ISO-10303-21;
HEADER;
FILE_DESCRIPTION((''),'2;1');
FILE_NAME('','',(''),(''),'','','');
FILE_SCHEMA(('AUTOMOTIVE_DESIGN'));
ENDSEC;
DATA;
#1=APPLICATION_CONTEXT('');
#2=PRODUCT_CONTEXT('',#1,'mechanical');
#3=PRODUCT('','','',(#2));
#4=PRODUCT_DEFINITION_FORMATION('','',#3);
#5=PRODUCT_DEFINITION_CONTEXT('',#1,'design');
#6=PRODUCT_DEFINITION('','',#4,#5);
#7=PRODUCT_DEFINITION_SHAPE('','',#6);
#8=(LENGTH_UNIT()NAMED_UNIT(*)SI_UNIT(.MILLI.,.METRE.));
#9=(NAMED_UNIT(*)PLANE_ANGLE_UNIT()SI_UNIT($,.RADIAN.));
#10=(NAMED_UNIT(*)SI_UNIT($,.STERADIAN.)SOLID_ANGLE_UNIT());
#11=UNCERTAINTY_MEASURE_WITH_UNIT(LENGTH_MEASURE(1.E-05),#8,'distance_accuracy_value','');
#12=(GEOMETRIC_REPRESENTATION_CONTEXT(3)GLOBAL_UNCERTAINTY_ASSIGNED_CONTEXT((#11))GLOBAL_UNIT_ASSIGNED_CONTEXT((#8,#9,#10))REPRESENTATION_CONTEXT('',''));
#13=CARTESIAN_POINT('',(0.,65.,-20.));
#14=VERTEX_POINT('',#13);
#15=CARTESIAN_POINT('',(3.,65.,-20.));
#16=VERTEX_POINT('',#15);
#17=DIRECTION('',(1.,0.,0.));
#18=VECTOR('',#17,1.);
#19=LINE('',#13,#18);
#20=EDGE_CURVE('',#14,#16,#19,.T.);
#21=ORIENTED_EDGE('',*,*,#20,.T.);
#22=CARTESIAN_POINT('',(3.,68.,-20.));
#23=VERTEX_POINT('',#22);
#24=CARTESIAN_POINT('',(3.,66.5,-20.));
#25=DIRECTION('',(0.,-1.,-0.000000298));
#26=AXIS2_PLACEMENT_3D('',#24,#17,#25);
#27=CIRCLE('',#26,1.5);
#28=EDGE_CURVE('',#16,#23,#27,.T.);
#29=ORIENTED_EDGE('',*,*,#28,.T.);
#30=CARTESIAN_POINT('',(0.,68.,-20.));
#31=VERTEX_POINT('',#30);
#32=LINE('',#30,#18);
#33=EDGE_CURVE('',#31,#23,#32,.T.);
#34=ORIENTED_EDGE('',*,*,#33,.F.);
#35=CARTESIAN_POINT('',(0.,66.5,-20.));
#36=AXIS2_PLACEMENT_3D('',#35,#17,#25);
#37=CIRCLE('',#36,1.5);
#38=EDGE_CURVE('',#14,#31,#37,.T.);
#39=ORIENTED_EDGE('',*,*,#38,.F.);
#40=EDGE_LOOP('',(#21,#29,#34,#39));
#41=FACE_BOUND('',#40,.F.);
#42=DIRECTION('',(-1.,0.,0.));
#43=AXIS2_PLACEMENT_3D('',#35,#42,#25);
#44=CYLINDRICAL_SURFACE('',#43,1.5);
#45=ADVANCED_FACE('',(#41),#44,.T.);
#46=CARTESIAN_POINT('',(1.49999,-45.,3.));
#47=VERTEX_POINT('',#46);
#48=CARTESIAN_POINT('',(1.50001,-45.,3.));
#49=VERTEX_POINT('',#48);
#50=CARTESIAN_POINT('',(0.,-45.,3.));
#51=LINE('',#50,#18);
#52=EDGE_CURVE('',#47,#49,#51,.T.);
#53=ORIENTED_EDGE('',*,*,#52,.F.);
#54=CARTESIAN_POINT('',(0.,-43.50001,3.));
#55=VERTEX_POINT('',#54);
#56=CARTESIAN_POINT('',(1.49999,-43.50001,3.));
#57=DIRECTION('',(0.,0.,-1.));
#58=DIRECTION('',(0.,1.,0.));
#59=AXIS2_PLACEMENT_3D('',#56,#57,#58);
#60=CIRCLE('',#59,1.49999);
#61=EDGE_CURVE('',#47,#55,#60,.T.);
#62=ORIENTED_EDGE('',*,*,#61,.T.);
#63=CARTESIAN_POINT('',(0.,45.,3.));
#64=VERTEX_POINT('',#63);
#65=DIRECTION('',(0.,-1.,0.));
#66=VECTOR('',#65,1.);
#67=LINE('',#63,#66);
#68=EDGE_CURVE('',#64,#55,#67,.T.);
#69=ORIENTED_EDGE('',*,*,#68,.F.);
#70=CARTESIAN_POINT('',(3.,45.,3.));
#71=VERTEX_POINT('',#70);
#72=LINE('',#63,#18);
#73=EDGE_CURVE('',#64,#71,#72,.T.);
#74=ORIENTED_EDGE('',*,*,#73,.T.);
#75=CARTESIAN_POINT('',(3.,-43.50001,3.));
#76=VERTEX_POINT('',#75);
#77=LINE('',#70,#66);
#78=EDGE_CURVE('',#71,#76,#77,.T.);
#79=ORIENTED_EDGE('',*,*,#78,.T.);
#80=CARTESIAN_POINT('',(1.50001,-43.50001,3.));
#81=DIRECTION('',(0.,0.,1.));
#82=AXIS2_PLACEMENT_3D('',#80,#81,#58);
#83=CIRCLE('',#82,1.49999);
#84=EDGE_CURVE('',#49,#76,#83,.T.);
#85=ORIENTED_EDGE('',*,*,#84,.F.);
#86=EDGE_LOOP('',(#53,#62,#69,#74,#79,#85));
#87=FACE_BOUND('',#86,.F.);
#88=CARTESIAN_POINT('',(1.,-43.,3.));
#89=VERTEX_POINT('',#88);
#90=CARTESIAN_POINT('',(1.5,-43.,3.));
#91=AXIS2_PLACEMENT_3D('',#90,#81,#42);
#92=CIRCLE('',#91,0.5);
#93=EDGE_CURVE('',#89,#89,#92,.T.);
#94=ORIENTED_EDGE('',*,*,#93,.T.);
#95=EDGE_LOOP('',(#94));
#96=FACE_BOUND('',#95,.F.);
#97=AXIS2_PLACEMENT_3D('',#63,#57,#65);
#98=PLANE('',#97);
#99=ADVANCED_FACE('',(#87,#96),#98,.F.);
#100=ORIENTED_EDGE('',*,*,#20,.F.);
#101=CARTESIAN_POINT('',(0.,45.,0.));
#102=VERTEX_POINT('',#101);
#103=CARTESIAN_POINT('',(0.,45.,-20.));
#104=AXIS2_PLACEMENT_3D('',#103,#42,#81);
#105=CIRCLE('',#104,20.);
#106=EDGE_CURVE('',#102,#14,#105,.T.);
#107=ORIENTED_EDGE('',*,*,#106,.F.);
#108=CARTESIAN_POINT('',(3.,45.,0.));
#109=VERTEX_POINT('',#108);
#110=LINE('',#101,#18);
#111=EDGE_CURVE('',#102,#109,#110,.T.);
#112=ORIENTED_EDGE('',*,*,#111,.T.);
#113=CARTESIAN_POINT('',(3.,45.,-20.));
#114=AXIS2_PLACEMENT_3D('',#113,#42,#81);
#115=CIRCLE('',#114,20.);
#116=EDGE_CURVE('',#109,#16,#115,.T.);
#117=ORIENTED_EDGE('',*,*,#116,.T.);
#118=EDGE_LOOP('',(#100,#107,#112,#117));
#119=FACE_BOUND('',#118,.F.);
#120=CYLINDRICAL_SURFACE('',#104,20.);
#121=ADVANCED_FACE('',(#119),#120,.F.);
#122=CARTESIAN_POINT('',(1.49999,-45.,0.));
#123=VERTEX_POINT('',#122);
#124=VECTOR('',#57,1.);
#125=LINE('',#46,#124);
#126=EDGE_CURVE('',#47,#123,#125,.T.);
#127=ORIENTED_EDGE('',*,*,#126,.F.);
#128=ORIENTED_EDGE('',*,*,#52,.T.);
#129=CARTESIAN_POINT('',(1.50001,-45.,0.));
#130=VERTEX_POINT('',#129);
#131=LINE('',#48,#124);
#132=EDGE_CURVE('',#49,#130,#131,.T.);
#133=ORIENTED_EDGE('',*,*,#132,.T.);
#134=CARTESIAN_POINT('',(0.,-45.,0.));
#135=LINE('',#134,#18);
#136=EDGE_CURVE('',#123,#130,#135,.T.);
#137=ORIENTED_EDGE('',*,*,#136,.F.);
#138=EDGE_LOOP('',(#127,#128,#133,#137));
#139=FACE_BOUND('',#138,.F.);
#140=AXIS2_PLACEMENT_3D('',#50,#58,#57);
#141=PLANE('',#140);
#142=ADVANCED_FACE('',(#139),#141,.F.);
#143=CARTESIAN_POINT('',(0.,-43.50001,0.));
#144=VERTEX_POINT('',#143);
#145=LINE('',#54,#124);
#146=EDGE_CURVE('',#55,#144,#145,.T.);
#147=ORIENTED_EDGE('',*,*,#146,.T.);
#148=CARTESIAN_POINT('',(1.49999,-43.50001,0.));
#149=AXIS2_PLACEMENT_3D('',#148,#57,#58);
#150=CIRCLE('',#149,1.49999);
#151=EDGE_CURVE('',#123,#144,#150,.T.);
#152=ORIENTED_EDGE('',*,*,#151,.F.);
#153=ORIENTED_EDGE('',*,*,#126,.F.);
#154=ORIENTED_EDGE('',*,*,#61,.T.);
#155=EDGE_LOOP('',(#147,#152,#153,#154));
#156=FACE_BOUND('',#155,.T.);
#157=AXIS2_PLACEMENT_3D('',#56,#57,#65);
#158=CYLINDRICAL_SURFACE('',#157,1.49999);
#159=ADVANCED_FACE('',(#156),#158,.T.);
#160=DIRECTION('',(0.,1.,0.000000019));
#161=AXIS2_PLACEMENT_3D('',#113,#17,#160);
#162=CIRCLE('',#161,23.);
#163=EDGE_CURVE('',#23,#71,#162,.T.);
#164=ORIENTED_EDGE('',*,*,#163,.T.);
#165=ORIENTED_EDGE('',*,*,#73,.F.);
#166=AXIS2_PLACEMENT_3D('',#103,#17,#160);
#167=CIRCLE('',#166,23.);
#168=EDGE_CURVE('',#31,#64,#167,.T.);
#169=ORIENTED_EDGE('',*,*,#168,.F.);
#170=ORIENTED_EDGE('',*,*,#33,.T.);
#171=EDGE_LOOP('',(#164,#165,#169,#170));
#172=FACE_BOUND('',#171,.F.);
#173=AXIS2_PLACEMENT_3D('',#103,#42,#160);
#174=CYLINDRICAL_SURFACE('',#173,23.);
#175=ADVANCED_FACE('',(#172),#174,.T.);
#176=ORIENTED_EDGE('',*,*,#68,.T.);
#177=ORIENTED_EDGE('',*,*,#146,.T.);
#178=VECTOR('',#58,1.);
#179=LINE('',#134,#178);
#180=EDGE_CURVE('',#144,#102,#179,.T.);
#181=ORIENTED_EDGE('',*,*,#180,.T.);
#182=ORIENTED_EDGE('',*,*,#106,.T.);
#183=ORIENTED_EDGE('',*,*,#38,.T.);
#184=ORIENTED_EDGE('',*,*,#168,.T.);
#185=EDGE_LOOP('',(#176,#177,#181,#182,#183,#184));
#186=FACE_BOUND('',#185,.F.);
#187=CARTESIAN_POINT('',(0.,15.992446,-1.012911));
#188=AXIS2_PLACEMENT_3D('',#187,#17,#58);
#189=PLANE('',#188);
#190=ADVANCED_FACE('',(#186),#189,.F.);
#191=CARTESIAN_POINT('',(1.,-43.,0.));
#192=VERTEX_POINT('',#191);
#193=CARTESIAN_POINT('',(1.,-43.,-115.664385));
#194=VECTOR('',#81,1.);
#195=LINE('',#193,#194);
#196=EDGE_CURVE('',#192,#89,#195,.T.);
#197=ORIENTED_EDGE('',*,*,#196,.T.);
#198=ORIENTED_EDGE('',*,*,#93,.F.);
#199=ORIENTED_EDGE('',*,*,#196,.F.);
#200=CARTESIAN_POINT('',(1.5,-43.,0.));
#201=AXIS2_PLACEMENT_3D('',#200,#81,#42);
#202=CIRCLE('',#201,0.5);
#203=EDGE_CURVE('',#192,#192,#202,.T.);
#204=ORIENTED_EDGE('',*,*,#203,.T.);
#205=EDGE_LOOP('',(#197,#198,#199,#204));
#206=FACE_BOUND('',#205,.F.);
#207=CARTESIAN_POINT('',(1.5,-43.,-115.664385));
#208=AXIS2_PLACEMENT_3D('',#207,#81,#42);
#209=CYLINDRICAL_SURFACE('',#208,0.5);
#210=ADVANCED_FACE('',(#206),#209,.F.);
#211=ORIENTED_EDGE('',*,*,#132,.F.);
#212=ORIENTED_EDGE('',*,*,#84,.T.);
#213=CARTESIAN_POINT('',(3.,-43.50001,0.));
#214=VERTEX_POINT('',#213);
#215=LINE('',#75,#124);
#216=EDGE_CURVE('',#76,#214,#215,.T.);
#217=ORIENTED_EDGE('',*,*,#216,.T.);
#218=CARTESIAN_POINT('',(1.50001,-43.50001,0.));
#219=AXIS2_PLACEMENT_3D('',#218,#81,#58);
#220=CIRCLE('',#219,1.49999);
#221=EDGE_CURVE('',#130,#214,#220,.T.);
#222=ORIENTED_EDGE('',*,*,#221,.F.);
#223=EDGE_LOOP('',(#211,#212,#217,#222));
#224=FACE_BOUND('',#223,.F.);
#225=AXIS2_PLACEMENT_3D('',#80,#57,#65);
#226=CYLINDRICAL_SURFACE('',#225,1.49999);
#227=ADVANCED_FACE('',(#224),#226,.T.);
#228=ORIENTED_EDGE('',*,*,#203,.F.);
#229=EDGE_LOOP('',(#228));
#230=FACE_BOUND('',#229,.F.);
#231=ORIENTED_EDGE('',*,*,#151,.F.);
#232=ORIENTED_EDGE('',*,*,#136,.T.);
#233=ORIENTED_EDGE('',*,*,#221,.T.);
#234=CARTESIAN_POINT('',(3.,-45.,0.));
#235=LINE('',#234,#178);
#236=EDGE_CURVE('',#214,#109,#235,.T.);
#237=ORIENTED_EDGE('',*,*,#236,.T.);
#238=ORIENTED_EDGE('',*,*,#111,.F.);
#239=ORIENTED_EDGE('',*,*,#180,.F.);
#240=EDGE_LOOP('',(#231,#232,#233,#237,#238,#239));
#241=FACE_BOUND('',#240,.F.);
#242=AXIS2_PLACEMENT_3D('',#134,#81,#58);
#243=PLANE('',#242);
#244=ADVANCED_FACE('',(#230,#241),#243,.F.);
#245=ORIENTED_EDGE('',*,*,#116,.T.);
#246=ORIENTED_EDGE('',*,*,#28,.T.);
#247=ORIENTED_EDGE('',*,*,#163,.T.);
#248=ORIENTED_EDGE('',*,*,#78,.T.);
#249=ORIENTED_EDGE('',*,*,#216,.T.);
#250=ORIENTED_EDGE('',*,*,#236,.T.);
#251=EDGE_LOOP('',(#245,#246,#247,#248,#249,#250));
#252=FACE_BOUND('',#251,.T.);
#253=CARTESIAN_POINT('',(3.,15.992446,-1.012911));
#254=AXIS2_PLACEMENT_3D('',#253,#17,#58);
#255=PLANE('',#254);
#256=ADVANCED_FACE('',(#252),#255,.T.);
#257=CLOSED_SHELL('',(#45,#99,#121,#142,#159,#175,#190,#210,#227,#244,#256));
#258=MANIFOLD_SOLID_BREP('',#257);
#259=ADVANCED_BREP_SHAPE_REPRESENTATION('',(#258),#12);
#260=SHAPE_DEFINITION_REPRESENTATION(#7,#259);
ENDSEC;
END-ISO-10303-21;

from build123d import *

# Parameters (mm, degrees)
F1_DEPTH = 3
F3_D     = 1
F4_R     = 1.49999


# Not quite as in the source:
# - a fillet or chamfer is up to 0.001 mm smaller than in the source, because OpenCascade refuses the exact size
# - ends of sketch curves that miss each other by under 0.0002 mm in the source are joined


with BuildPart() as f1:
    # F0 (on Right) → F1 (new body)
    with BuildSketch(Plane.YZ):
        with BuildLine():
            Line((-45, 3), (-45, 0))
            Line((-45, 0), (45, 0))
            ThreePointArc((45, 0), (59.1421356237, -5.8578643763), (65, -20))
            ThreePointArc((65, -20), (66.5000000156, -21.499999553), (68, -19.999999553))
            ThreePointArc((68, -19.999999553), (61.2634559673, -3.7365440327), (45, 3))
            Line((45, 3), (-45, 3))
        make_face()
    extrude(amount=F1_DEPTH)

    # F3 (through all)
    with Locations(Plane(origin=(0, 0, 0), x_dir=(1, 0, 0), z_dir=(0, 0, -1))):
        with Locations((1.5, 43)):
            Hole(F3_D / 2)

    # F4 (radius 1.5 in the source; OpenCascade refuses exactly that, so slightly less here)
    f4_edges = [f1.edges().sort_by_distance(p)[0] for p in [
        (3, -45, 1.5),
        (0, -45, 1.5),
    ]]
    fillet(f4_edges, radius=F4_R)


solid = f1.part
